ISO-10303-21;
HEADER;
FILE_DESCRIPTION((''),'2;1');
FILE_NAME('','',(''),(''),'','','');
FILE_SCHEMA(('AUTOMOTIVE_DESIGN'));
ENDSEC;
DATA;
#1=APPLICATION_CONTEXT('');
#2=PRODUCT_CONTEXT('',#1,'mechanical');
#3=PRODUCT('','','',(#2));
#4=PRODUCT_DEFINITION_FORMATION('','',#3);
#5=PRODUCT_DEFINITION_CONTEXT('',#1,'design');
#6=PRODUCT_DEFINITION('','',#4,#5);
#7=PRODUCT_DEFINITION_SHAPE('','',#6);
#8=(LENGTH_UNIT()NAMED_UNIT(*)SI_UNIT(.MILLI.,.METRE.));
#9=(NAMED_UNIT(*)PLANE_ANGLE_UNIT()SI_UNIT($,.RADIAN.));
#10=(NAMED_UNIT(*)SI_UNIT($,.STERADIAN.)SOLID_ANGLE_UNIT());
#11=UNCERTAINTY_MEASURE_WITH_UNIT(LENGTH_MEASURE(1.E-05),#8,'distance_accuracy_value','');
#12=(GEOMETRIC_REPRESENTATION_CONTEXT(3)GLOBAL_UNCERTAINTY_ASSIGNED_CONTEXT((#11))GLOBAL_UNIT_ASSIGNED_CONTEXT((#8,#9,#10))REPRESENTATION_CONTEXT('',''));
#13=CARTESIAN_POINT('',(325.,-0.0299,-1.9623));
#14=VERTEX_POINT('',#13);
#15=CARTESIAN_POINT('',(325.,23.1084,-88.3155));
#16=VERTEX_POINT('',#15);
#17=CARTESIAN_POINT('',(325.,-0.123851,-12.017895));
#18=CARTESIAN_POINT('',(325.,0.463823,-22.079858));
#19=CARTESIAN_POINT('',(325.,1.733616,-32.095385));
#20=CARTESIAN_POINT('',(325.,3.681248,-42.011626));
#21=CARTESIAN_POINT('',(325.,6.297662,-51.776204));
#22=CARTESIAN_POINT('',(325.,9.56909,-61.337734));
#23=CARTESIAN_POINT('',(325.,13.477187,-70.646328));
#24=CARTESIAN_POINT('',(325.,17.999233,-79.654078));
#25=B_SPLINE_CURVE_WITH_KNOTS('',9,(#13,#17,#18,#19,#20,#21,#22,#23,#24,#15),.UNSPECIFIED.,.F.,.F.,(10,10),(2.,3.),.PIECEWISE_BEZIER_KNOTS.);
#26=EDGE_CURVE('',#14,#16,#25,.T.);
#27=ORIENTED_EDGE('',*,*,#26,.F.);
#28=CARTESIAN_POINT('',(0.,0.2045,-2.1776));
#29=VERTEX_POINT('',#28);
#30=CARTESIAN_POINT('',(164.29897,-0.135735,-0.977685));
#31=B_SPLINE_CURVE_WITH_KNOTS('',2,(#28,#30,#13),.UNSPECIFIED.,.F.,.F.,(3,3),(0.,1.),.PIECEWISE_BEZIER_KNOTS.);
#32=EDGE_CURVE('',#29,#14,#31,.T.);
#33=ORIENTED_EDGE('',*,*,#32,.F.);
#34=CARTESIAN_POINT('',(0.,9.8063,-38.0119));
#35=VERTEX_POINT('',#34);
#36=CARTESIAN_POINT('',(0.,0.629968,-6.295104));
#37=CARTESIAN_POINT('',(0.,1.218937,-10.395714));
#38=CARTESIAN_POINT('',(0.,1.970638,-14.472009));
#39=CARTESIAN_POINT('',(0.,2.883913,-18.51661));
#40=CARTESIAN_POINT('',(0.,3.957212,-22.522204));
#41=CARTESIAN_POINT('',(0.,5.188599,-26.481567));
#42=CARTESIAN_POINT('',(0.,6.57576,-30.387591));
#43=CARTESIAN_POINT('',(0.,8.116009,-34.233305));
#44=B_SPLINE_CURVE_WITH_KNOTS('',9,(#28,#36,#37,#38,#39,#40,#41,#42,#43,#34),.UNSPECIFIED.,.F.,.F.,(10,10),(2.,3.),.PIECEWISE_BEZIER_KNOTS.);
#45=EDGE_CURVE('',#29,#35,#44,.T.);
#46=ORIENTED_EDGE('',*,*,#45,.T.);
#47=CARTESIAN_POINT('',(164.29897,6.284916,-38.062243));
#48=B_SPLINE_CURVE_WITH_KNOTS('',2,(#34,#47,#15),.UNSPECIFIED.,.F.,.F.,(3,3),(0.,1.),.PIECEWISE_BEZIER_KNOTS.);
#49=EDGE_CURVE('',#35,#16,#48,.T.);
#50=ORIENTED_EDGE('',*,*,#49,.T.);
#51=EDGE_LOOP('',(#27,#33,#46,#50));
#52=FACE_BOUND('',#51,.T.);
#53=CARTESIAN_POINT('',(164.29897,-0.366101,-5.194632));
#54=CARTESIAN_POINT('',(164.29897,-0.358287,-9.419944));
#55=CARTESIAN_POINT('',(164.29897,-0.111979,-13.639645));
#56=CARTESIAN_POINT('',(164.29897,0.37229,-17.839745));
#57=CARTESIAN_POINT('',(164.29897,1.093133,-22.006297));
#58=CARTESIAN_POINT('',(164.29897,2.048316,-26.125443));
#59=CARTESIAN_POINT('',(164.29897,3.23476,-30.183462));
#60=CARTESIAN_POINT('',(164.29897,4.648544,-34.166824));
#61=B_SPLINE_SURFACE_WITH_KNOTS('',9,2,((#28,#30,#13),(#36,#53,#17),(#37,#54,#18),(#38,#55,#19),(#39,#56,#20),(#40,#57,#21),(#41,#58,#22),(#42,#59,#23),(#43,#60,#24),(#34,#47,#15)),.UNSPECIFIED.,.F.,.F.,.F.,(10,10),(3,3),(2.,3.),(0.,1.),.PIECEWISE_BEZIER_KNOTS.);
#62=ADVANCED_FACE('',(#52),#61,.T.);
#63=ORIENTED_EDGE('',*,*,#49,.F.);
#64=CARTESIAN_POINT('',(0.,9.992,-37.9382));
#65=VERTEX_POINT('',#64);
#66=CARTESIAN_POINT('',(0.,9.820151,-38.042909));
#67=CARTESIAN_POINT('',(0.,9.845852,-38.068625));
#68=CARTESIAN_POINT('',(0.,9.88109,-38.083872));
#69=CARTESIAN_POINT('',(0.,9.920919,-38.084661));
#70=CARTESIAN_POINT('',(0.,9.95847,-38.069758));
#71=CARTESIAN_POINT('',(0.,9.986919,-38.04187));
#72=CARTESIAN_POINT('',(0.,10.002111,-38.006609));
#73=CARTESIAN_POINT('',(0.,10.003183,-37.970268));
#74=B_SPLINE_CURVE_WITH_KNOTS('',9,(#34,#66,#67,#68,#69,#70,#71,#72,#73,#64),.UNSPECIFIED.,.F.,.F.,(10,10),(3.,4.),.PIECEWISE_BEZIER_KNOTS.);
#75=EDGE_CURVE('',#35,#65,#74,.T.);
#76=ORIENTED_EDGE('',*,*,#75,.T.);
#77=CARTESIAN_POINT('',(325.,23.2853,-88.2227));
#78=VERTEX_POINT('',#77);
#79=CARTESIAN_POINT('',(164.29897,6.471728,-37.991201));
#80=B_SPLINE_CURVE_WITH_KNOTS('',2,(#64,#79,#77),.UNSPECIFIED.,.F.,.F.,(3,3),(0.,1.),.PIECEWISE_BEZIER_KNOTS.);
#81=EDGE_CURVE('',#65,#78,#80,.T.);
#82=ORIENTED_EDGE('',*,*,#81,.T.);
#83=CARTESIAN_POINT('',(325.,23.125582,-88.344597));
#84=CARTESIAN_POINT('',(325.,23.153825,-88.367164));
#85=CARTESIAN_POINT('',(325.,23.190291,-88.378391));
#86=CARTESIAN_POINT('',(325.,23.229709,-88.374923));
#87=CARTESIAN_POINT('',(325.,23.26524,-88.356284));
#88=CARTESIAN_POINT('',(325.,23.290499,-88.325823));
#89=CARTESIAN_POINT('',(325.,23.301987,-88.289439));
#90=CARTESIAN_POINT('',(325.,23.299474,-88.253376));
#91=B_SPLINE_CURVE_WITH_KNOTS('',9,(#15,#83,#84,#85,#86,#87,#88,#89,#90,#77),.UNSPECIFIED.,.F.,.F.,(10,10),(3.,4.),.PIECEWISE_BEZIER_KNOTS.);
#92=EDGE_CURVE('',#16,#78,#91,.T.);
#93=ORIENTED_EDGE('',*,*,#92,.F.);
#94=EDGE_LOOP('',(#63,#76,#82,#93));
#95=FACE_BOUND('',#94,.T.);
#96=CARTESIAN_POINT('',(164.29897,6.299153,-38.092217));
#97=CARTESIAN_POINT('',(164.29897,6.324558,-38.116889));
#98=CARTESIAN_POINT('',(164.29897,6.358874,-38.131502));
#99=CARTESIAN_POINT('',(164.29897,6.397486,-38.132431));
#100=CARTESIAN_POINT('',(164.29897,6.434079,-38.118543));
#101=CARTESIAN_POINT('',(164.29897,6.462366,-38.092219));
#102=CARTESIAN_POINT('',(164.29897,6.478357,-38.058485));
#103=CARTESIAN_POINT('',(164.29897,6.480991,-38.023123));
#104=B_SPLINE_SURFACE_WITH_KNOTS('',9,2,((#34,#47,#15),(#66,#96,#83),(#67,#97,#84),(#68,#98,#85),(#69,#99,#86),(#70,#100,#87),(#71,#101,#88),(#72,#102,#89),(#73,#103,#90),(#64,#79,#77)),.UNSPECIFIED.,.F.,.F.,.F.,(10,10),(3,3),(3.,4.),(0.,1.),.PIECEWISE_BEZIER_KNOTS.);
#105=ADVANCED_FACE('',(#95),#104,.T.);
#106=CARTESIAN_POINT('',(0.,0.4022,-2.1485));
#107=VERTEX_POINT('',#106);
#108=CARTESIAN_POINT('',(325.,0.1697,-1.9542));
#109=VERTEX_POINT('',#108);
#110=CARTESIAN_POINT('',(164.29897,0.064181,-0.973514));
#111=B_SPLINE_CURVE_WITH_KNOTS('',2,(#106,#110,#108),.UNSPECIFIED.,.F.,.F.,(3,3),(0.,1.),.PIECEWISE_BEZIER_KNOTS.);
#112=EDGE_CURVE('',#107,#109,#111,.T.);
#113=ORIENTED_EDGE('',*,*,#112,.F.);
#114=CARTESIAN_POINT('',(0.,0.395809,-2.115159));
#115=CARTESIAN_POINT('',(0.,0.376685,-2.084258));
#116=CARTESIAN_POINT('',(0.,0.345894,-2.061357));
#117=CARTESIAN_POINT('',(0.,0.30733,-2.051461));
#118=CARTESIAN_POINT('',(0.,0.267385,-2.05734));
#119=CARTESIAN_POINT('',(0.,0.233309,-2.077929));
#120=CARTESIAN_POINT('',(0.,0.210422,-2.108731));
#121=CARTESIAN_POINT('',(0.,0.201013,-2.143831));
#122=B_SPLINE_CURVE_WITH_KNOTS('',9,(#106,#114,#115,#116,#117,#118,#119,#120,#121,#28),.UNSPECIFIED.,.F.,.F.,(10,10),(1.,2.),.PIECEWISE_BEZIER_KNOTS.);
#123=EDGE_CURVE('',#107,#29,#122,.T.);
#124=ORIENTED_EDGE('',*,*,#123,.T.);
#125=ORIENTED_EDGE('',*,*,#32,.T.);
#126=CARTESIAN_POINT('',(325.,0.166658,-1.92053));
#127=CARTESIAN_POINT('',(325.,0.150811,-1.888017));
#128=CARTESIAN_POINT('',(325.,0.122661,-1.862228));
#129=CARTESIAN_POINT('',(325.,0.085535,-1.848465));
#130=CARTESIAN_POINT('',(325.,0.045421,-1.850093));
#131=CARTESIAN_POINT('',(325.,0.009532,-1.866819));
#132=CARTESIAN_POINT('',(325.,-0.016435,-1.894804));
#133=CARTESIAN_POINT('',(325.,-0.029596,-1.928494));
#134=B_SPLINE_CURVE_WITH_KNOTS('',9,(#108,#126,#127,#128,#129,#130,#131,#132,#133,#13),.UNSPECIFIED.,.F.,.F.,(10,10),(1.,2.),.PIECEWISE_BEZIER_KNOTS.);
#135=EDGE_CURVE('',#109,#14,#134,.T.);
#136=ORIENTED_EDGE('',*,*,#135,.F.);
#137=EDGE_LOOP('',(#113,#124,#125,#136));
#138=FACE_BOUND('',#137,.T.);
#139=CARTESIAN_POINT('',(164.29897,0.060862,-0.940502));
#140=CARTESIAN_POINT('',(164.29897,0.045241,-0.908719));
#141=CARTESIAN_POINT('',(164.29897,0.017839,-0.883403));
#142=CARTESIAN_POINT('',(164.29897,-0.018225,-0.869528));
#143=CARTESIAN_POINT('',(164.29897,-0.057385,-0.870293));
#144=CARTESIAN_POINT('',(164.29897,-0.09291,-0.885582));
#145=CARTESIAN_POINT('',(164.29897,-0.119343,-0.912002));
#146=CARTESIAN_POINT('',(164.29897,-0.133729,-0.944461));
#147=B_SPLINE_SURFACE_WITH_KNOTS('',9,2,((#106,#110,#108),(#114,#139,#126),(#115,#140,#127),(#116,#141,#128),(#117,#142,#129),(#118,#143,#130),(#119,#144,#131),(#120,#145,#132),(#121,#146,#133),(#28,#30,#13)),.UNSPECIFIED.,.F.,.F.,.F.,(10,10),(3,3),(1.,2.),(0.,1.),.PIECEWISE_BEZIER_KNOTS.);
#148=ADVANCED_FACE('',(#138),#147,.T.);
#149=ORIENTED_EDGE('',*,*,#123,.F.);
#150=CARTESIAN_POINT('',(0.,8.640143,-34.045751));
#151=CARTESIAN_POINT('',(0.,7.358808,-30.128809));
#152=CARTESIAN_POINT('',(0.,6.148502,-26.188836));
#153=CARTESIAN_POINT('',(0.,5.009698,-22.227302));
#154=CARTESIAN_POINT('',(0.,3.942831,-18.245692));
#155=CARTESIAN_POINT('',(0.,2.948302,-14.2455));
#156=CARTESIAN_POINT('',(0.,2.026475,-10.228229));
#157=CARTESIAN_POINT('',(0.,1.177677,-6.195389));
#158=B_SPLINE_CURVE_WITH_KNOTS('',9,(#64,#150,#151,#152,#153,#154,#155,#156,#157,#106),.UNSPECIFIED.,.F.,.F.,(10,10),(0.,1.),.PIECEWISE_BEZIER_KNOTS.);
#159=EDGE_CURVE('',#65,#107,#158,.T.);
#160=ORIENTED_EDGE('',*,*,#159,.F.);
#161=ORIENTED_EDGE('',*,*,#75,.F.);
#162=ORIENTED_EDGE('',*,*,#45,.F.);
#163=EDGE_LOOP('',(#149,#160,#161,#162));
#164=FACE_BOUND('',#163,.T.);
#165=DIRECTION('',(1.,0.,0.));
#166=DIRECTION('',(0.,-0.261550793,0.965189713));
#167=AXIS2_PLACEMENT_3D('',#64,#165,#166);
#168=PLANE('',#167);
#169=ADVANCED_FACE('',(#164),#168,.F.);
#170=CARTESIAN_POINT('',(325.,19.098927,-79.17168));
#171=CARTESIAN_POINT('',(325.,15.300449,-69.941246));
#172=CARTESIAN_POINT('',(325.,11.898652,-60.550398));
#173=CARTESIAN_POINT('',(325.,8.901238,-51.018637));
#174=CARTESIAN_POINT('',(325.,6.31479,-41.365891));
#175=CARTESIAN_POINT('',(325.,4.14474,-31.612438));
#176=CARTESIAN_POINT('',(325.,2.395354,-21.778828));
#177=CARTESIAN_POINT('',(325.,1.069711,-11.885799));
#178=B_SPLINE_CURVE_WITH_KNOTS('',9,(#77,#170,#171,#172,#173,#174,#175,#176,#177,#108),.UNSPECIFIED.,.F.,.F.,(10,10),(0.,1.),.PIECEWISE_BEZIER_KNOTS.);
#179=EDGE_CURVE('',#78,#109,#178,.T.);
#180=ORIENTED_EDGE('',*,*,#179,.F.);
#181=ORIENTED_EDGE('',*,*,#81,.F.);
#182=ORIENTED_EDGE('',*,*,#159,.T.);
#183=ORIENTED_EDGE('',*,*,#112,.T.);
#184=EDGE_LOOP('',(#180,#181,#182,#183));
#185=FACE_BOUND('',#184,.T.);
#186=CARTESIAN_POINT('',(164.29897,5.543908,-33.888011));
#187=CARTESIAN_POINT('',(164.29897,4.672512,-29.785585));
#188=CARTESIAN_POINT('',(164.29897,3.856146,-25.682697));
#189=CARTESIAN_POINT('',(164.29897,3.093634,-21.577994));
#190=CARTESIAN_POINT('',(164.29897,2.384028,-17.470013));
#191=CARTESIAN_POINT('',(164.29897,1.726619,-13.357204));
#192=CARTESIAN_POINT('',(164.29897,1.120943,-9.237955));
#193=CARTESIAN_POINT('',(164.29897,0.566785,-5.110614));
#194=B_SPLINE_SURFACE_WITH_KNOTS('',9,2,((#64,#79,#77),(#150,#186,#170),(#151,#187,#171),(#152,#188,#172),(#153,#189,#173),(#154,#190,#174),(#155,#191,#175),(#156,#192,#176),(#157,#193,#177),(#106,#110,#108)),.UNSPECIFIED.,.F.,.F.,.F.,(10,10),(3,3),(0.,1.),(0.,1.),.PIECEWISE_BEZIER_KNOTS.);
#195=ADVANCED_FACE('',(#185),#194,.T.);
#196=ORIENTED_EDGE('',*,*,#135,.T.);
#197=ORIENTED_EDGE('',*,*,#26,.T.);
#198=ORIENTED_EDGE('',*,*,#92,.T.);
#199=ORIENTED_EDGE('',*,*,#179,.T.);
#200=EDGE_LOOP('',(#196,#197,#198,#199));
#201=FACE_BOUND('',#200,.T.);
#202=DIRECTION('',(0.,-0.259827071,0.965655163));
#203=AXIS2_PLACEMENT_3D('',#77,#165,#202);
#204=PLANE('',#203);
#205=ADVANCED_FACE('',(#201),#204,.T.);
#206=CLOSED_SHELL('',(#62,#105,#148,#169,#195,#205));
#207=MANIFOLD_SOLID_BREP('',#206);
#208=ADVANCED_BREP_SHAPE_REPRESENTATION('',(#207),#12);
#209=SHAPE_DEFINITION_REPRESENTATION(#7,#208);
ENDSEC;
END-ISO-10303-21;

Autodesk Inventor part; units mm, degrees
ref_plane "XZ Plane" through (0, 0, 0) normal (0, 1, 0) x (-1, 0, 0)
ref_plane "作業平面1" through (150, 0, 0) normal (1, 0, 0) x (0, 1, 0)
ref_plane "作業平面2" through (325, 0, 0) normal (1, 0, 0) x (0, 1, 0)
sketch "スケッチ2" plane through (0, 0, 0) normal (1, 0, 0) x (0, 1, 0)
  arc A0 (0.4022, -2.1485) -> (9.992, -37.9382) centre (251.688, 46.0036) ccw
  arc A1 (0.2045, -2.1776) -> (9.8063, -38.0119) centre (116.8603, 9.8767) ccw
  line L0 (0, -57.2007) -> (0, 63.2044) projected
  line L1 (0, 0) -> (10.718, -40)
  arc A2 (9.8063, -38.0119) -> (9.992, -37.9382) centre (9.8976, -37.9711) ccw
  arc A3 (0.4022, -2.1485) -> (0.2045, -2.1776) centre (0.304, -2.1673) ccw
  dimension "d6" = 40
  dimension "d8" = 15
  dimension "d9" = 0.1
  dimension "d10" = 0.1
sketch "スケッチ3" plane through (150, 0, 0) normal (1, 0, 0) x (0, 1, 0)
  line L0 (0, 0) -> (11.5434, -50)
  arc A0 (0.1854, -1.5241) -> (11.0419, -48.5488) centre (234.0668, 27.7061) ccw
  arc A1 (-0.0138, -1.5364) -> (10.8575, -48.6252) centre (106.5896, -1.7244) ccw
  line L1 (0, -65.5412) -> (0, 43.2473) projected
  arc A2 (10.8575, -48.6252) -> (11.0419, -48.5488) centre (10.9473, -48.5812) ccw
  arc A3 (0.1854, -1.5241) -> (-0.0138, -1.5364) centre (0.0862, -1.5365) ccw
  dimension "d11" = 13
  dimension "d12" = 50
  dimension "d13" = 0.1
sketch "スケッチ4" plane through (325, 0, 0) normal (1, 0, 0) x (0, 1, 0)
  line L0 (0, 0) -> (24.1154, -90)
  arc A0 (0.1697, -1.9542) -> (23.2853, -88.2227) centre (260.8799, 21.6717) ccw
  arc A1 (-0.0299, -1.9623) -> (23.1084, -88.3155) centre (166.8575, -3.5215) ccw
  line L1 (0, -112.3343) -> (0, 44.0061) projected
  arc A2 (23.1084, -88.3155) -> (23.2853, -88.2227) centre (23.1945, -88.2647) ccw
  arc A3 (0.1697, -1.9542) -> (-0.0299, -1.9623) centre (0.0701, -1.9632) ccw
  dimension "d18" = 15
  dimension "d19" = 90
  dimension "d20" = 0.1
loft "ロフト2" add profiles "スケッチ2", "スケッチ3", "スケッチ4"
properties part number "test_front_element_2"
